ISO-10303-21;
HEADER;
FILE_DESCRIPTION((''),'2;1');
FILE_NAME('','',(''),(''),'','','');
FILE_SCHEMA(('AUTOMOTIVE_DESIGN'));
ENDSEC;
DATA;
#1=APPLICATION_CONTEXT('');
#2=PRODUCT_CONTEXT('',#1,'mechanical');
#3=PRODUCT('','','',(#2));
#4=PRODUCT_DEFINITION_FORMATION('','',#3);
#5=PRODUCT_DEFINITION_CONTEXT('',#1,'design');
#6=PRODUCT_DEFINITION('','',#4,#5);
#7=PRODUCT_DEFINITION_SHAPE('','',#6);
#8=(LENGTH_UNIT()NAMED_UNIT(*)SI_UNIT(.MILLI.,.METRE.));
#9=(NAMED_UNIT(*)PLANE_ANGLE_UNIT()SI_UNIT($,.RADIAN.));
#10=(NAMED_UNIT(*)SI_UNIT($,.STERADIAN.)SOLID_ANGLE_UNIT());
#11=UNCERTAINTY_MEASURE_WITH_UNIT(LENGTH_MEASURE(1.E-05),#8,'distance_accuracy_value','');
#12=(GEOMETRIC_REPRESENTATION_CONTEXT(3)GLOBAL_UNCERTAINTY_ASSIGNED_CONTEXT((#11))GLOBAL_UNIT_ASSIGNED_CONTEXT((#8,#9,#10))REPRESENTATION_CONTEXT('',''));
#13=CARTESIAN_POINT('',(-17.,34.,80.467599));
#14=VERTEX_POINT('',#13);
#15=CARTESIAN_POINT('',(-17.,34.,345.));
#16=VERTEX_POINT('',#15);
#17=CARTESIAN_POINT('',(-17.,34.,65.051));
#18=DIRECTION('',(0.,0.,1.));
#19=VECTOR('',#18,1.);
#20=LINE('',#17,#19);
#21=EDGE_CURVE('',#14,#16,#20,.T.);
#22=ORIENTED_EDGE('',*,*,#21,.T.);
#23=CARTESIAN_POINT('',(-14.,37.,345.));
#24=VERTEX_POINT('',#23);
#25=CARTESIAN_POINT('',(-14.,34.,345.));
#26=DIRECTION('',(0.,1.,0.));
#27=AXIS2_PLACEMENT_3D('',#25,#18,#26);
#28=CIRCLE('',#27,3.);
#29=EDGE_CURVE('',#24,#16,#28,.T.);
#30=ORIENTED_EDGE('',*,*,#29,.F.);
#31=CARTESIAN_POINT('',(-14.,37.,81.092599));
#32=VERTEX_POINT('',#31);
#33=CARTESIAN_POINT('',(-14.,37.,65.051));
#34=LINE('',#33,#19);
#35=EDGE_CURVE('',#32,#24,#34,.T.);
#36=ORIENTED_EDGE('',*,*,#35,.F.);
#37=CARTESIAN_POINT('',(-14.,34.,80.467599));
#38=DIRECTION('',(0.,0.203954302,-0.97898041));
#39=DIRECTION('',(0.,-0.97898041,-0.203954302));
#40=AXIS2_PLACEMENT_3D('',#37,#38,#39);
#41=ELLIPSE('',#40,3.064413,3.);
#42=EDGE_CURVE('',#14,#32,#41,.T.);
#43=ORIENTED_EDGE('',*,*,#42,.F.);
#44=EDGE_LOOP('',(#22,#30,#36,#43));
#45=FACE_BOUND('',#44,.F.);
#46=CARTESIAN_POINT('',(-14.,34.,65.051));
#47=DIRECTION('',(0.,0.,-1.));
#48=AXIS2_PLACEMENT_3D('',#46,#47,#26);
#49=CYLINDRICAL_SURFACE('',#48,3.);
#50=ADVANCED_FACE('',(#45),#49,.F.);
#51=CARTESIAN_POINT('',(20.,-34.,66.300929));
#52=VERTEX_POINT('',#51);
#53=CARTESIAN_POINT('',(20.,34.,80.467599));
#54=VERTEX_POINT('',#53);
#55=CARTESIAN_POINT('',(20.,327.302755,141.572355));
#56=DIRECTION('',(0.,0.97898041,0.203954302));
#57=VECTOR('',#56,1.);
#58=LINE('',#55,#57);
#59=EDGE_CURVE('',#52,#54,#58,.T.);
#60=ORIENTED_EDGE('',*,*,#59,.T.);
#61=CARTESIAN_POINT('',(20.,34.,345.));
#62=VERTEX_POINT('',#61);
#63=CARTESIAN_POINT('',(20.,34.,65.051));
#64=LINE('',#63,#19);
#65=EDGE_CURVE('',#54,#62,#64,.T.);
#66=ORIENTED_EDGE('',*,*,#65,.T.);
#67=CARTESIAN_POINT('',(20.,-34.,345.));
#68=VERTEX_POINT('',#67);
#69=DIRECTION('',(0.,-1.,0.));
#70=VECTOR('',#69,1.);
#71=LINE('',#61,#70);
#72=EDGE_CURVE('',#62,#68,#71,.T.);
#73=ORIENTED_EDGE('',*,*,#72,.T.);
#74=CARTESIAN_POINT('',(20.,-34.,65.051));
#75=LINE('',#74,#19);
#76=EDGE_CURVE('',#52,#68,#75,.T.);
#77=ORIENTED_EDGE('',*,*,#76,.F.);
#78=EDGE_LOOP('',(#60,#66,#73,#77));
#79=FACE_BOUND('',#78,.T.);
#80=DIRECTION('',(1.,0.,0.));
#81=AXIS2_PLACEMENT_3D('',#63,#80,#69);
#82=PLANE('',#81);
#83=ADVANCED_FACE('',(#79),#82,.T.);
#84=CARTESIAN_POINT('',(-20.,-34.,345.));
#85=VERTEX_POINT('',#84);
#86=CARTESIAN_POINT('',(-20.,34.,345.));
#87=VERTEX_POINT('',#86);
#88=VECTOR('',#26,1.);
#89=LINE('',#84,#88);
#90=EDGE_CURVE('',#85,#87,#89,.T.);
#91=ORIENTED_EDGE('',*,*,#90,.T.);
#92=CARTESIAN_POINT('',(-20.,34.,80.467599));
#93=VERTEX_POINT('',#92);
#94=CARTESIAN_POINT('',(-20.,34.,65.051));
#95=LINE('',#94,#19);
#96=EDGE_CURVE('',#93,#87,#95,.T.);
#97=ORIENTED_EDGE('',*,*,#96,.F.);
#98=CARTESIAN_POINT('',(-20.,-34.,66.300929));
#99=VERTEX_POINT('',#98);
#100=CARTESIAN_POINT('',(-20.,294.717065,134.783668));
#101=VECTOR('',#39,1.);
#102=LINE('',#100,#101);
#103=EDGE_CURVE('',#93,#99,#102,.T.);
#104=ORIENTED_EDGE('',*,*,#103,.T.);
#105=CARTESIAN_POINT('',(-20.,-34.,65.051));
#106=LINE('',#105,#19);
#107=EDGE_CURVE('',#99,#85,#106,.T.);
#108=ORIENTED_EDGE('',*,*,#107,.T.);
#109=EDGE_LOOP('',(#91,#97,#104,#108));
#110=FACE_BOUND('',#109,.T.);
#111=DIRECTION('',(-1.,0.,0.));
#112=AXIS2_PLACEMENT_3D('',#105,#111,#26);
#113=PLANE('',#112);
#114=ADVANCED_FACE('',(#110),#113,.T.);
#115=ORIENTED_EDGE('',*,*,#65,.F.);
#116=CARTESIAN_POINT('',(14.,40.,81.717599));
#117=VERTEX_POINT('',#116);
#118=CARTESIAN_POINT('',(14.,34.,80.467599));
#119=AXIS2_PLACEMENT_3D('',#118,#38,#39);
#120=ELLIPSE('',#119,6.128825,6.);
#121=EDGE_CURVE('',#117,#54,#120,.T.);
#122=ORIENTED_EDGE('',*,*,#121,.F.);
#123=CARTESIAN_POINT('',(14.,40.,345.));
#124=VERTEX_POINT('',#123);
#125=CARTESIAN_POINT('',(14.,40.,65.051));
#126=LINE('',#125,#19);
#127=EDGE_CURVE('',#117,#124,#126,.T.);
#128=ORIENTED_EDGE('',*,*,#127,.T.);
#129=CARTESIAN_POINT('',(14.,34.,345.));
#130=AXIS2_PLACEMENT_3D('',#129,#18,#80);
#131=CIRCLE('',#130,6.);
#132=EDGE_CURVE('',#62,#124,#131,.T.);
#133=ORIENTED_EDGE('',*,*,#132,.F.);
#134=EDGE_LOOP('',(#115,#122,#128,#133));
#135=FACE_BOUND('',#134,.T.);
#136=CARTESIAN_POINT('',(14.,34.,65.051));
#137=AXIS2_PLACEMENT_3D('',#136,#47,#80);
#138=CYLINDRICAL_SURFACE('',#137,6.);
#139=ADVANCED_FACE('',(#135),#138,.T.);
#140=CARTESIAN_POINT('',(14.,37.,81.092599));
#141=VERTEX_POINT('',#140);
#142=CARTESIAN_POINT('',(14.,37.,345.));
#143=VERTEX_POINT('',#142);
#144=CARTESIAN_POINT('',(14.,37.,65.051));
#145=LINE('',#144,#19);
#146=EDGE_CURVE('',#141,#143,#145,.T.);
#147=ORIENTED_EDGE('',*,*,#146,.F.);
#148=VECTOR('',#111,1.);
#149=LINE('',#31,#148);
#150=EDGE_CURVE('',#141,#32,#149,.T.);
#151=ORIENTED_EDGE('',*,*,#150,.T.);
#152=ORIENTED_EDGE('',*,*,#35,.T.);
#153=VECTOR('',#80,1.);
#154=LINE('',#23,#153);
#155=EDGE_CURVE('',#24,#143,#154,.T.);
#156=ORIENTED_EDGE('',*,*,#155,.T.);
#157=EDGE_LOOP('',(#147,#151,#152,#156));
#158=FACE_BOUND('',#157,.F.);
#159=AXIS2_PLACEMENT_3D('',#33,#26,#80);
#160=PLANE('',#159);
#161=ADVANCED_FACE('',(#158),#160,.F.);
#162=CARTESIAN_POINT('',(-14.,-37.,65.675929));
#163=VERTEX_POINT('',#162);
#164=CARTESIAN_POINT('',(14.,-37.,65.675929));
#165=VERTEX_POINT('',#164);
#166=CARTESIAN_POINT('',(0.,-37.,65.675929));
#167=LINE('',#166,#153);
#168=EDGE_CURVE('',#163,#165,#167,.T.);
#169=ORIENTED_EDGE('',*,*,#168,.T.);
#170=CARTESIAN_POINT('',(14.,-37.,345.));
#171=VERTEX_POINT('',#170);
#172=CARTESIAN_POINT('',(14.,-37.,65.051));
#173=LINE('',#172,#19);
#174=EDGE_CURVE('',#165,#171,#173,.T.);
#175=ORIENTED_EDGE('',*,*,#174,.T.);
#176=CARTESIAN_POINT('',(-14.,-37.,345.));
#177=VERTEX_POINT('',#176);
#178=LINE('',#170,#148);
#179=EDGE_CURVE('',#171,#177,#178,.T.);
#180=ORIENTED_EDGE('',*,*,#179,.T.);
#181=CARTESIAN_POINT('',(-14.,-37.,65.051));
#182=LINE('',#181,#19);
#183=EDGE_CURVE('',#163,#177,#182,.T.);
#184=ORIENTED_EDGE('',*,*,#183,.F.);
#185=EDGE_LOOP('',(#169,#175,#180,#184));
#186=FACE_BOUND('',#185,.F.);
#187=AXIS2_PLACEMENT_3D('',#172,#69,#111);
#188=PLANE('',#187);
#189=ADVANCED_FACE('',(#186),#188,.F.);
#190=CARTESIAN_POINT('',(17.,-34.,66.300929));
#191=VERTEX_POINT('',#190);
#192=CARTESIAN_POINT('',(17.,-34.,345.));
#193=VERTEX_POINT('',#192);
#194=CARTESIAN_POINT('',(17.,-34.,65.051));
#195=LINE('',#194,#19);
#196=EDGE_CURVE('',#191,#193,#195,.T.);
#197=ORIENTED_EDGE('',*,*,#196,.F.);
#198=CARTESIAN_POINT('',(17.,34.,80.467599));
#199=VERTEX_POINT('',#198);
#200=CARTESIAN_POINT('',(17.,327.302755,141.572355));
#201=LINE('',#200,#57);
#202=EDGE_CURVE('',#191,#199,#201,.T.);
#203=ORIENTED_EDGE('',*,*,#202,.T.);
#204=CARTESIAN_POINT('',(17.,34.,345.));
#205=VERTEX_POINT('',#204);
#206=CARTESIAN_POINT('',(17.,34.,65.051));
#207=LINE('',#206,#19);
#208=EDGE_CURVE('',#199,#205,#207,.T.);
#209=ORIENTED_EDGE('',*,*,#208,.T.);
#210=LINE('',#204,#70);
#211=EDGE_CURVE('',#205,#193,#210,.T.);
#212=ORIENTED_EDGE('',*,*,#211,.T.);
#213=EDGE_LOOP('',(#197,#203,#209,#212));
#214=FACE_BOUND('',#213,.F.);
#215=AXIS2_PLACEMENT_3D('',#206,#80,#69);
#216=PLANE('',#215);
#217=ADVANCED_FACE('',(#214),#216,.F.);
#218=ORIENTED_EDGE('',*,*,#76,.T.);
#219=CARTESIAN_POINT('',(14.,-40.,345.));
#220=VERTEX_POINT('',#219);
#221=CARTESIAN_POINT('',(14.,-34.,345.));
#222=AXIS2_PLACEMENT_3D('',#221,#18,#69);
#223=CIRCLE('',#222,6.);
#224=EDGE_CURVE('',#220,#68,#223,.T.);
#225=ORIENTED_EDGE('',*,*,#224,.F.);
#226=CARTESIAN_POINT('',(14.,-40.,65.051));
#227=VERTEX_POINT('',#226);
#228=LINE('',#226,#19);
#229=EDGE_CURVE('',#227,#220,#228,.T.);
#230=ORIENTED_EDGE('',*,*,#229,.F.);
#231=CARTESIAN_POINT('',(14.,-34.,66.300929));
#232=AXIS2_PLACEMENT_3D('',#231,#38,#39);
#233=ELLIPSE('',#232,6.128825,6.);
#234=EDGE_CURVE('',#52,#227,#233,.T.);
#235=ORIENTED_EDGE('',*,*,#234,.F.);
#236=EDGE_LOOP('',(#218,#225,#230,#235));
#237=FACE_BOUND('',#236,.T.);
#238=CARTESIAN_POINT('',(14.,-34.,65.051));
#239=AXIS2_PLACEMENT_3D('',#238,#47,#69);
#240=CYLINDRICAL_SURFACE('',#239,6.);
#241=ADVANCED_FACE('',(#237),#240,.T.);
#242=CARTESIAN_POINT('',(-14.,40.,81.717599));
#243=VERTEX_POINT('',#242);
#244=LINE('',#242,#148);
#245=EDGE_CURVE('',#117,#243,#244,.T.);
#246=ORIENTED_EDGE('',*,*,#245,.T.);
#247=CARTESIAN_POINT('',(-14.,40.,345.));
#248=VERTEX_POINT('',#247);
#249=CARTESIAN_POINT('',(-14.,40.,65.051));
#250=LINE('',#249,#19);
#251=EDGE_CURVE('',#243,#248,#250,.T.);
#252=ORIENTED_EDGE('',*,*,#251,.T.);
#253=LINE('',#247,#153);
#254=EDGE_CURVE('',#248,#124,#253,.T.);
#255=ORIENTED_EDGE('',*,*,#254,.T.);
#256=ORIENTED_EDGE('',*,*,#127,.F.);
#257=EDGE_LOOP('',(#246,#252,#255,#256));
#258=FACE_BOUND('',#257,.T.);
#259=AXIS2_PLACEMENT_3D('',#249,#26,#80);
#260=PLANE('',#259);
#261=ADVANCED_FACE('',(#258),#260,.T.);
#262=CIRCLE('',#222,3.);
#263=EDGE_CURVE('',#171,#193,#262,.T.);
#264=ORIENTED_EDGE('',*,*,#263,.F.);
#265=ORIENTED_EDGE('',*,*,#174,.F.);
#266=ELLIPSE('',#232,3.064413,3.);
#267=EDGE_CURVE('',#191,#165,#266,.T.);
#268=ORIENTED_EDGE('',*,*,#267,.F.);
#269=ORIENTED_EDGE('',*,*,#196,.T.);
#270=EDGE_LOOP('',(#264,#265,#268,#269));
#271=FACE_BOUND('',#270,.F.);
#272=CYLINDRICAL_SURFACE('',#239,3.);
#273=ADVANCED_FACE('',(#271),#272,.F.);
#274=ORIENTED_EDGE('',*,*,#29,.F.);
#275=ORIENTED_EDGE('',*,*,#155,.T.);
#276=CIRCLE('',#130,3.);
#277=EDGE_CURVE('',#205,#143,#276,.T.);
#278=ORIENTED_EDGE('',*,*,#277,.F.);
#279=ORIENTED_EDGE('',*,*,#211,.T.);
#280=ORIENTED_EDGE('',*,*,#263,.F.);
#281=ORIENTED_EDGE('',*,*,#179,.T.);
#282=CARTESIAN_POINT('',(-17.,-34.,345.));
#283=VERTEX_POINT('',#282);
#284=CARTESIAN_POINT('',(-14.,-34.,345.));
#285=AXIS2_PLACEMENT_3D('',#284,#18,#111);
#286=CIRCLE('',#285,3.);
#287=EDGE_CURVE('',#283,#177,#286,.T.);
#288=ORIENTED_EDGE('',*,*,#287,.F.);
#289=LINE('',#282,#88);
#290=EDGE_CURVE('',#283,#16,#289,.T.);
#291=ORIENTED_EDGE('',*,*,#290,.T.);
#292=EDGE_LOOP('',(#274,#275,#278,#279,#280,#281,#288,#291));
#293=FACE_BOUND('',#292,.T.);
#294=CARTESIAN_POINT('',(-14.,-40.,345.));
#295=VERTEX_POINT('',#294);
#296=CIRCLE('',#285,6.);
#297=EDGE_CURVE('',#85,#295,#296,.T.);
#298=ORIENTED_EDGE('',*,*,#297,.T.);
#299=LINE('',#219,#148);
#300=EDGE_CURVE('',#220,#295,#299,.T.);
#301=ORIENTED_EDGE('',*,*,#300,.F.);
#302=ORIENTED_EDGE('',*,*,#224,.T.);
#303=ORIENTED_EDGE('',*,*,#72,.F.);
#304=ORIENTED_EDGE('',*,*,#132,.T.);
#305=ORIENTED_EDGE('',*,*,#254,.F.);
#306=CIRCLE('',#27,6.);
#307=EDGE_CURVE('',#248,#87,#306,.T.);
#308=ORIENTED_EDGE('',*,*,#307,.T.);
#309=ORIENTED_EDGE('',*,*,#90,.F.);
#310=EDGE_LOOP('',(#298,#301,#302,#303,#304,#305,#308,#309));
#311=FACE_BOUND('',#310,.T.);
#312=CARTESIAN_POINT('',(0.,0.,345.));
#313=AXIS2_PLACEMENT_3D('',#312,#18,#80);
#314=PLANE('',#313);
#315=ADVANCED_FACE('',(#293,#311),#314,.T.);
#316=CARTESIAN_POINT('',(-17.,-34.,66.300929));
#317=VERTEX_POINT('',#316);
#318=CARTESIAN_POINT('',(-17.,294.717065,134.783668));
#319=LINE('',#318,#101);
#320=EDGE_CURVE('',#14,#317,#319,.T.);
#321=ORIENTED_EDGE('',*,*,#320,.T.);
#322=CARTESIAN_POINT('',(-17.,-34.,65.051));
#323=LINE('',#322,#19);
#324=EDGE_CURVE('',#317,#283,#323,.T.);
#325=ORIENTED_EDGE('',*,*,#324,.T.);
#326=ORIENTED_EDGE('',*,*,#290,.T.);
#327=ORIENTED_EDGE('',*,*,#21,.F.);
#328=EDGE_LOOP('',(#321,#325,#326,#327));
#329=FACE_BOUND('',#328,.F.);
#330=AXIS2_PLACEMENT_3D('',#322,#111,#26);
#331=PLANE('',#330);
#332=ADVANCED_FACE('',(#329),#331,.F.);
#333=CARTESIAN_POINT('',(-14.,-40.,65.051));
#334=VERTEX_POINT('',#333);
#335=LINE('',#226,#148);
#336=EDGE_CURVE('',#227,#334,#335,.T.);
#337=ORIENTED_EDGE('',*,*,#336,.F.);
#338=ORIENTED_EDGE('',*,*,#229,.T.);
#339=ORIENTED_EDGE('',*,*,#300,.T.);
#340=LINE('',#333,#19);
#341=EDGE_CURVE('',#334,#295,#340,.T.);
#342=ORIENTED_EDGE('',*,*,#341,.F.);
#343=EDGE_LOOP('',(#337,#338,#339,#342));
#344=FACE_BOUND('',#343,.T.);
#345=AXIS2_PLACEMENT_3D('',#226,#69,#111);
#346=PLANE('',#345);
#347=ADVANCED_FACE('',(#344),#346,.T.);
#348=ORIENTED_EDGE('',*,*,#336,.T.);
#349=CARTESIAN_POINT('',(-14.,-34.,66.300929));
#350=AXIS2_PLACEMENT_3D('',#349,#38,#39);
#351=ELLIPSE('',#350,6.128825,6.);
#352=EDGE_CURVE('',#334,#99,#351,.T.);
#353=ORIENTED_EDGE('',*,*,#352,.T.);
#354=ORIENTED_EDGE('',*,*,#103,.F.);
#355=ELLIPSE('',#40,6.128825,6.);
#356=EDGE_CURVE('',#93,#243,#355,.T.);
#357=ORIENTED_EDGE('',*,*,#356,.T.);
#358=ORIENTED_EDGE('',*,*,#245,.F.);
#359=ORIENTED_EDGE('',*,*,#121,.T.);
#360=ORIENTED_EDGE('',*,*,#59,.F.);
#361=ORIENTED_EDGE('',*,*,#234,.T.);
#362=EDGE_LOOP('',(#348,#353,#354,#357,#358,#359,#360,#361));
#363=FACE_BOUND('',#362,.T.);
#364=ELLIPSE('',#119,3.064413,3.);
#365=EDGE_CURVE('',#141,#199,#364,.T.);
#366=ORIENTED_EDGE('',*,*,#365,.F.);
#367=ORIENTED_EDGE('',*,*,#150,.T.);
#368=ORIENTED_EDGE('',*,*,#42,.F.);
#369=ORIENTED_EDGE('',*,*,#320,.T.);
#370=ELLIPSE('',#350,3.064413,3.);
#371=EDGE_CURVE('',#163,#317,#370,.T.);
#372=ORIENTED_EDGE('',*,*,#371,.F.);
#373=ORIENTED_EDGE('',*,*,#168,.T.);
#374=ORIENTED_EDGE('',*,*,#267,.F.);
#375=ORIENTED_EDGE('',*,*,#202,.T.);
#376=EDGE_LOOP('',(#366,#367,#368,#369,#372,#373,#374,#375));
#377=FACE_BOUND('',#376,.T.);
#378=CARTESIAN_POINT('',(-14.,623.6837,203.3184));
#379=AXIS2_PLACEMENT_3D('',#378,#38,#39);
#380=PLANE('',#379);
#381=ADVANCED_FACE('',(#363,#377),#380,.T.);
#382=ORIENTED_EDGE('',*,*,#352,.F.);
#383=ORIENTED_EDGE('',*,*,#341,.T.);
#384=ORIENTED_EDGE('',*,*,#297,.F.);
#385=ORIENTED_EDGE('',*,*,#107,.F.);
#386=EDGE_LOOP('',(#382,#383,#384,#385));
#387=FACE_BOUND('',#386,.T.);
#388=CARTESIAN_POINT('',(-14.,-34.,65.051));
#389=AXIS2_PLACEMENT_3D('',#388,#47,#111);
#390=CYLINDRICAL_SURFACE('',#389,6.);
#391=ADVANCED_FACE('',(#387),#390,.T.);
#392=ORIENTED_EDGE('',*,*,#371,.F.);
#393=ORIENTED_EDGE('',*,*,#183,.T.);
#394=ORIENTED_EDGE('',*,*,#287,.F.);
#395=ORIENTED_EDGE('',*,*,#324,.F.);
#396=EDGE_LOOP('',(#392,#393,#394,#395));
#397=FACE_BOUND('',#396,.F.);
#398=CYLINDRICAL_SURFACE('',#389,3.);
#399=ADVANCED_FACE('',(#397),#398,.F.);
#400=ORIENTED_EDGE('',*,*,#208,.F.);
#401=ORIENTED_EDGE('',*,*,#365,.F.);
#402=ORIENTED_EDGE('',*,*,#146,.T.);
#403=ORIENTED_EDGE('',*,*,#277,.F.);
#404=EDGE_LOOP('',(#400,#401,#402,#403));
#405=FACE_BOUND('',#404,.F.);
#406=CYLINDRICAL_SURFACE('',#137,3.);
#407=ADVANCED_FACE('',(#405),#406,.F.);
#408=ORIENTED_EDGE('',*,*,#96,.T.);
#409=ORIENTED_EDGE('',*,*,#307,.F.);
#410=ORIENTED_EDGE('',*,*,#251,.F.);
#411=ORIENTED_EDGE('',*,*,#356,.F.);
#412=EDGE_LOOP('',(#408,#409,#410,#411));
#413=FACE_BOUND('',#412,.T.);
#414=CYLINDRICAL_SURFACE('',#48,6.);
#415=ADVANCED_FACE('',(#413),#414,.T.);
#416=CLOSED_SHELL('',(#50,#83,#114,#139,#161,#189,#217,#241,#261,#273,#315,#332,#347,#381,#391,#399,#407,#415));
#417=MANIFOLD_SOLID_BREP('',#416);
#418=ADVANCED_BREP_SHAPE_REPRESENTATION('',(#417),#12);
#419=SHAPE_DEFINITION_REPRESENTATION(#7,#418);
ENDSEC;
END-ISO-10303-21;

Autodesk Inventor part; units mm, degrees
ref_plane "Start Plane" through (0, 0, 65.051) normal (0, 0, 1) x (1, 0, 0)
ref_plane "End Plane" through (0, 0, 345) normal (0, 0, 1) x (1, 0, 0)
sketch "Sketch" plane through (0, 0, 0) normal (0, 0, 1) x (1, 0, 0)
  line L0 (-20, -34) -> (-20, 34)
  line L1 (-14, 40) -> (14, 40)
  line L2 (20, 34) -> (20, -34)
  line L3 (14, -40) -> (-14, -40)
  arc A0 (-20, -34) -> (-14, -40) centre (-14, -34) ccw
  arc A1 (20, 34) -> (14, 40) centre (14, 34) ccw
  arc A2 (-14, 40) -> (-20, 34) centre (-14, 34) ccw
  arc A3 (14, -40) -> (20, -34) centre (14, -34) ccw
  arc A4 (-14, 37) -> (-17, 34) centre (-14, 34) ccw
  line L4 (-14, 37) -> (14, 37)
  arc A5 (17, 34) -> (14, 37) centre (14, 34) ccw
  line L5 (17, 34) -> (17, -34)
  arc A6 (14, -37) -> (17, -34) centre (14, -34) ccw
  line L6 (14, -37) -> (-14, -37)
  arc A7 (-17, -34) -> (-14, -37) centre (-14, -34) ccw
  line L7 (-17, -34) -> (-17, 34)
  line L8 (0, 57.7397) -> (0, -57.7397) construction
  line L9 (-29.7397, 0) -> (29.7397, 0) construction
  dimension "d7" = 6
  dimension "d9" = 40
  dimension "d11" = 80
  dimension "d12" = 3
  dimension "d15" = 20
  dimension "d16" = 40
extrude "Body" add sketch "Sketch" along normal up to surface (279.949 mm away) from surface at 65.051
sketch "Sketch3" plane through (0, 0, 0) normal (0, 0, 1) x (1, 0, 0)
  line L0 (0, 0) -> (10, 0)
ref_plane "Work Plane3" through (0, 0, 0) normal (0, -1, 0) x (1, 0, 0)
ref_plane "Work Plane4" through (-14, 623.6837, 203.3184) normal (0, 0.2039543, -0.9789804) x (1, 0, 0)
split "Split1" plane through (-14, 623.6837, 203.3184) removes the side toward (0, 0.2039543, -0.9789804)
sketch "Sketch4" plane through (0, 0, 0) normal (0, -1, 0) x (1, 0, 0)
  line L0 (-2, 65.051) -> (12, 65.051) projected
  line L1 (-2, 345) -> (12, 345) projected
  dimension "d18" = 279.949
equation "\"d7\" = G_IR"
equation "\"d9\" = G_W"
equation "\"d11\" = G_H"
equation "\"d12\" = G_T"
equation "\"d15\" = 0.5 * d9"
equation "\"d16\" = 0.5 * d11"
equation "\"d3\" = G_L"
equation "\"G_W\" = 40"
equation "\"G_H\" = 80"
equation "\"G_T\" = 3"
equation "\"G_IR\" = 6"
equation "\"G_L\" = d18"
equation "\"G_OFFSET_START\" = -65.051"
equation "\"d13\" = -G_OFFSET_START"
equation "\"d14\" = G_OFFSET_END + B_L"
equation "\"B_L\" = 425"
equation "\"G_OFFSET_END\" = -80"
properties part number "ISO 10799-2 - 80x40x3 - 279.95" material "Steel, Mild"
